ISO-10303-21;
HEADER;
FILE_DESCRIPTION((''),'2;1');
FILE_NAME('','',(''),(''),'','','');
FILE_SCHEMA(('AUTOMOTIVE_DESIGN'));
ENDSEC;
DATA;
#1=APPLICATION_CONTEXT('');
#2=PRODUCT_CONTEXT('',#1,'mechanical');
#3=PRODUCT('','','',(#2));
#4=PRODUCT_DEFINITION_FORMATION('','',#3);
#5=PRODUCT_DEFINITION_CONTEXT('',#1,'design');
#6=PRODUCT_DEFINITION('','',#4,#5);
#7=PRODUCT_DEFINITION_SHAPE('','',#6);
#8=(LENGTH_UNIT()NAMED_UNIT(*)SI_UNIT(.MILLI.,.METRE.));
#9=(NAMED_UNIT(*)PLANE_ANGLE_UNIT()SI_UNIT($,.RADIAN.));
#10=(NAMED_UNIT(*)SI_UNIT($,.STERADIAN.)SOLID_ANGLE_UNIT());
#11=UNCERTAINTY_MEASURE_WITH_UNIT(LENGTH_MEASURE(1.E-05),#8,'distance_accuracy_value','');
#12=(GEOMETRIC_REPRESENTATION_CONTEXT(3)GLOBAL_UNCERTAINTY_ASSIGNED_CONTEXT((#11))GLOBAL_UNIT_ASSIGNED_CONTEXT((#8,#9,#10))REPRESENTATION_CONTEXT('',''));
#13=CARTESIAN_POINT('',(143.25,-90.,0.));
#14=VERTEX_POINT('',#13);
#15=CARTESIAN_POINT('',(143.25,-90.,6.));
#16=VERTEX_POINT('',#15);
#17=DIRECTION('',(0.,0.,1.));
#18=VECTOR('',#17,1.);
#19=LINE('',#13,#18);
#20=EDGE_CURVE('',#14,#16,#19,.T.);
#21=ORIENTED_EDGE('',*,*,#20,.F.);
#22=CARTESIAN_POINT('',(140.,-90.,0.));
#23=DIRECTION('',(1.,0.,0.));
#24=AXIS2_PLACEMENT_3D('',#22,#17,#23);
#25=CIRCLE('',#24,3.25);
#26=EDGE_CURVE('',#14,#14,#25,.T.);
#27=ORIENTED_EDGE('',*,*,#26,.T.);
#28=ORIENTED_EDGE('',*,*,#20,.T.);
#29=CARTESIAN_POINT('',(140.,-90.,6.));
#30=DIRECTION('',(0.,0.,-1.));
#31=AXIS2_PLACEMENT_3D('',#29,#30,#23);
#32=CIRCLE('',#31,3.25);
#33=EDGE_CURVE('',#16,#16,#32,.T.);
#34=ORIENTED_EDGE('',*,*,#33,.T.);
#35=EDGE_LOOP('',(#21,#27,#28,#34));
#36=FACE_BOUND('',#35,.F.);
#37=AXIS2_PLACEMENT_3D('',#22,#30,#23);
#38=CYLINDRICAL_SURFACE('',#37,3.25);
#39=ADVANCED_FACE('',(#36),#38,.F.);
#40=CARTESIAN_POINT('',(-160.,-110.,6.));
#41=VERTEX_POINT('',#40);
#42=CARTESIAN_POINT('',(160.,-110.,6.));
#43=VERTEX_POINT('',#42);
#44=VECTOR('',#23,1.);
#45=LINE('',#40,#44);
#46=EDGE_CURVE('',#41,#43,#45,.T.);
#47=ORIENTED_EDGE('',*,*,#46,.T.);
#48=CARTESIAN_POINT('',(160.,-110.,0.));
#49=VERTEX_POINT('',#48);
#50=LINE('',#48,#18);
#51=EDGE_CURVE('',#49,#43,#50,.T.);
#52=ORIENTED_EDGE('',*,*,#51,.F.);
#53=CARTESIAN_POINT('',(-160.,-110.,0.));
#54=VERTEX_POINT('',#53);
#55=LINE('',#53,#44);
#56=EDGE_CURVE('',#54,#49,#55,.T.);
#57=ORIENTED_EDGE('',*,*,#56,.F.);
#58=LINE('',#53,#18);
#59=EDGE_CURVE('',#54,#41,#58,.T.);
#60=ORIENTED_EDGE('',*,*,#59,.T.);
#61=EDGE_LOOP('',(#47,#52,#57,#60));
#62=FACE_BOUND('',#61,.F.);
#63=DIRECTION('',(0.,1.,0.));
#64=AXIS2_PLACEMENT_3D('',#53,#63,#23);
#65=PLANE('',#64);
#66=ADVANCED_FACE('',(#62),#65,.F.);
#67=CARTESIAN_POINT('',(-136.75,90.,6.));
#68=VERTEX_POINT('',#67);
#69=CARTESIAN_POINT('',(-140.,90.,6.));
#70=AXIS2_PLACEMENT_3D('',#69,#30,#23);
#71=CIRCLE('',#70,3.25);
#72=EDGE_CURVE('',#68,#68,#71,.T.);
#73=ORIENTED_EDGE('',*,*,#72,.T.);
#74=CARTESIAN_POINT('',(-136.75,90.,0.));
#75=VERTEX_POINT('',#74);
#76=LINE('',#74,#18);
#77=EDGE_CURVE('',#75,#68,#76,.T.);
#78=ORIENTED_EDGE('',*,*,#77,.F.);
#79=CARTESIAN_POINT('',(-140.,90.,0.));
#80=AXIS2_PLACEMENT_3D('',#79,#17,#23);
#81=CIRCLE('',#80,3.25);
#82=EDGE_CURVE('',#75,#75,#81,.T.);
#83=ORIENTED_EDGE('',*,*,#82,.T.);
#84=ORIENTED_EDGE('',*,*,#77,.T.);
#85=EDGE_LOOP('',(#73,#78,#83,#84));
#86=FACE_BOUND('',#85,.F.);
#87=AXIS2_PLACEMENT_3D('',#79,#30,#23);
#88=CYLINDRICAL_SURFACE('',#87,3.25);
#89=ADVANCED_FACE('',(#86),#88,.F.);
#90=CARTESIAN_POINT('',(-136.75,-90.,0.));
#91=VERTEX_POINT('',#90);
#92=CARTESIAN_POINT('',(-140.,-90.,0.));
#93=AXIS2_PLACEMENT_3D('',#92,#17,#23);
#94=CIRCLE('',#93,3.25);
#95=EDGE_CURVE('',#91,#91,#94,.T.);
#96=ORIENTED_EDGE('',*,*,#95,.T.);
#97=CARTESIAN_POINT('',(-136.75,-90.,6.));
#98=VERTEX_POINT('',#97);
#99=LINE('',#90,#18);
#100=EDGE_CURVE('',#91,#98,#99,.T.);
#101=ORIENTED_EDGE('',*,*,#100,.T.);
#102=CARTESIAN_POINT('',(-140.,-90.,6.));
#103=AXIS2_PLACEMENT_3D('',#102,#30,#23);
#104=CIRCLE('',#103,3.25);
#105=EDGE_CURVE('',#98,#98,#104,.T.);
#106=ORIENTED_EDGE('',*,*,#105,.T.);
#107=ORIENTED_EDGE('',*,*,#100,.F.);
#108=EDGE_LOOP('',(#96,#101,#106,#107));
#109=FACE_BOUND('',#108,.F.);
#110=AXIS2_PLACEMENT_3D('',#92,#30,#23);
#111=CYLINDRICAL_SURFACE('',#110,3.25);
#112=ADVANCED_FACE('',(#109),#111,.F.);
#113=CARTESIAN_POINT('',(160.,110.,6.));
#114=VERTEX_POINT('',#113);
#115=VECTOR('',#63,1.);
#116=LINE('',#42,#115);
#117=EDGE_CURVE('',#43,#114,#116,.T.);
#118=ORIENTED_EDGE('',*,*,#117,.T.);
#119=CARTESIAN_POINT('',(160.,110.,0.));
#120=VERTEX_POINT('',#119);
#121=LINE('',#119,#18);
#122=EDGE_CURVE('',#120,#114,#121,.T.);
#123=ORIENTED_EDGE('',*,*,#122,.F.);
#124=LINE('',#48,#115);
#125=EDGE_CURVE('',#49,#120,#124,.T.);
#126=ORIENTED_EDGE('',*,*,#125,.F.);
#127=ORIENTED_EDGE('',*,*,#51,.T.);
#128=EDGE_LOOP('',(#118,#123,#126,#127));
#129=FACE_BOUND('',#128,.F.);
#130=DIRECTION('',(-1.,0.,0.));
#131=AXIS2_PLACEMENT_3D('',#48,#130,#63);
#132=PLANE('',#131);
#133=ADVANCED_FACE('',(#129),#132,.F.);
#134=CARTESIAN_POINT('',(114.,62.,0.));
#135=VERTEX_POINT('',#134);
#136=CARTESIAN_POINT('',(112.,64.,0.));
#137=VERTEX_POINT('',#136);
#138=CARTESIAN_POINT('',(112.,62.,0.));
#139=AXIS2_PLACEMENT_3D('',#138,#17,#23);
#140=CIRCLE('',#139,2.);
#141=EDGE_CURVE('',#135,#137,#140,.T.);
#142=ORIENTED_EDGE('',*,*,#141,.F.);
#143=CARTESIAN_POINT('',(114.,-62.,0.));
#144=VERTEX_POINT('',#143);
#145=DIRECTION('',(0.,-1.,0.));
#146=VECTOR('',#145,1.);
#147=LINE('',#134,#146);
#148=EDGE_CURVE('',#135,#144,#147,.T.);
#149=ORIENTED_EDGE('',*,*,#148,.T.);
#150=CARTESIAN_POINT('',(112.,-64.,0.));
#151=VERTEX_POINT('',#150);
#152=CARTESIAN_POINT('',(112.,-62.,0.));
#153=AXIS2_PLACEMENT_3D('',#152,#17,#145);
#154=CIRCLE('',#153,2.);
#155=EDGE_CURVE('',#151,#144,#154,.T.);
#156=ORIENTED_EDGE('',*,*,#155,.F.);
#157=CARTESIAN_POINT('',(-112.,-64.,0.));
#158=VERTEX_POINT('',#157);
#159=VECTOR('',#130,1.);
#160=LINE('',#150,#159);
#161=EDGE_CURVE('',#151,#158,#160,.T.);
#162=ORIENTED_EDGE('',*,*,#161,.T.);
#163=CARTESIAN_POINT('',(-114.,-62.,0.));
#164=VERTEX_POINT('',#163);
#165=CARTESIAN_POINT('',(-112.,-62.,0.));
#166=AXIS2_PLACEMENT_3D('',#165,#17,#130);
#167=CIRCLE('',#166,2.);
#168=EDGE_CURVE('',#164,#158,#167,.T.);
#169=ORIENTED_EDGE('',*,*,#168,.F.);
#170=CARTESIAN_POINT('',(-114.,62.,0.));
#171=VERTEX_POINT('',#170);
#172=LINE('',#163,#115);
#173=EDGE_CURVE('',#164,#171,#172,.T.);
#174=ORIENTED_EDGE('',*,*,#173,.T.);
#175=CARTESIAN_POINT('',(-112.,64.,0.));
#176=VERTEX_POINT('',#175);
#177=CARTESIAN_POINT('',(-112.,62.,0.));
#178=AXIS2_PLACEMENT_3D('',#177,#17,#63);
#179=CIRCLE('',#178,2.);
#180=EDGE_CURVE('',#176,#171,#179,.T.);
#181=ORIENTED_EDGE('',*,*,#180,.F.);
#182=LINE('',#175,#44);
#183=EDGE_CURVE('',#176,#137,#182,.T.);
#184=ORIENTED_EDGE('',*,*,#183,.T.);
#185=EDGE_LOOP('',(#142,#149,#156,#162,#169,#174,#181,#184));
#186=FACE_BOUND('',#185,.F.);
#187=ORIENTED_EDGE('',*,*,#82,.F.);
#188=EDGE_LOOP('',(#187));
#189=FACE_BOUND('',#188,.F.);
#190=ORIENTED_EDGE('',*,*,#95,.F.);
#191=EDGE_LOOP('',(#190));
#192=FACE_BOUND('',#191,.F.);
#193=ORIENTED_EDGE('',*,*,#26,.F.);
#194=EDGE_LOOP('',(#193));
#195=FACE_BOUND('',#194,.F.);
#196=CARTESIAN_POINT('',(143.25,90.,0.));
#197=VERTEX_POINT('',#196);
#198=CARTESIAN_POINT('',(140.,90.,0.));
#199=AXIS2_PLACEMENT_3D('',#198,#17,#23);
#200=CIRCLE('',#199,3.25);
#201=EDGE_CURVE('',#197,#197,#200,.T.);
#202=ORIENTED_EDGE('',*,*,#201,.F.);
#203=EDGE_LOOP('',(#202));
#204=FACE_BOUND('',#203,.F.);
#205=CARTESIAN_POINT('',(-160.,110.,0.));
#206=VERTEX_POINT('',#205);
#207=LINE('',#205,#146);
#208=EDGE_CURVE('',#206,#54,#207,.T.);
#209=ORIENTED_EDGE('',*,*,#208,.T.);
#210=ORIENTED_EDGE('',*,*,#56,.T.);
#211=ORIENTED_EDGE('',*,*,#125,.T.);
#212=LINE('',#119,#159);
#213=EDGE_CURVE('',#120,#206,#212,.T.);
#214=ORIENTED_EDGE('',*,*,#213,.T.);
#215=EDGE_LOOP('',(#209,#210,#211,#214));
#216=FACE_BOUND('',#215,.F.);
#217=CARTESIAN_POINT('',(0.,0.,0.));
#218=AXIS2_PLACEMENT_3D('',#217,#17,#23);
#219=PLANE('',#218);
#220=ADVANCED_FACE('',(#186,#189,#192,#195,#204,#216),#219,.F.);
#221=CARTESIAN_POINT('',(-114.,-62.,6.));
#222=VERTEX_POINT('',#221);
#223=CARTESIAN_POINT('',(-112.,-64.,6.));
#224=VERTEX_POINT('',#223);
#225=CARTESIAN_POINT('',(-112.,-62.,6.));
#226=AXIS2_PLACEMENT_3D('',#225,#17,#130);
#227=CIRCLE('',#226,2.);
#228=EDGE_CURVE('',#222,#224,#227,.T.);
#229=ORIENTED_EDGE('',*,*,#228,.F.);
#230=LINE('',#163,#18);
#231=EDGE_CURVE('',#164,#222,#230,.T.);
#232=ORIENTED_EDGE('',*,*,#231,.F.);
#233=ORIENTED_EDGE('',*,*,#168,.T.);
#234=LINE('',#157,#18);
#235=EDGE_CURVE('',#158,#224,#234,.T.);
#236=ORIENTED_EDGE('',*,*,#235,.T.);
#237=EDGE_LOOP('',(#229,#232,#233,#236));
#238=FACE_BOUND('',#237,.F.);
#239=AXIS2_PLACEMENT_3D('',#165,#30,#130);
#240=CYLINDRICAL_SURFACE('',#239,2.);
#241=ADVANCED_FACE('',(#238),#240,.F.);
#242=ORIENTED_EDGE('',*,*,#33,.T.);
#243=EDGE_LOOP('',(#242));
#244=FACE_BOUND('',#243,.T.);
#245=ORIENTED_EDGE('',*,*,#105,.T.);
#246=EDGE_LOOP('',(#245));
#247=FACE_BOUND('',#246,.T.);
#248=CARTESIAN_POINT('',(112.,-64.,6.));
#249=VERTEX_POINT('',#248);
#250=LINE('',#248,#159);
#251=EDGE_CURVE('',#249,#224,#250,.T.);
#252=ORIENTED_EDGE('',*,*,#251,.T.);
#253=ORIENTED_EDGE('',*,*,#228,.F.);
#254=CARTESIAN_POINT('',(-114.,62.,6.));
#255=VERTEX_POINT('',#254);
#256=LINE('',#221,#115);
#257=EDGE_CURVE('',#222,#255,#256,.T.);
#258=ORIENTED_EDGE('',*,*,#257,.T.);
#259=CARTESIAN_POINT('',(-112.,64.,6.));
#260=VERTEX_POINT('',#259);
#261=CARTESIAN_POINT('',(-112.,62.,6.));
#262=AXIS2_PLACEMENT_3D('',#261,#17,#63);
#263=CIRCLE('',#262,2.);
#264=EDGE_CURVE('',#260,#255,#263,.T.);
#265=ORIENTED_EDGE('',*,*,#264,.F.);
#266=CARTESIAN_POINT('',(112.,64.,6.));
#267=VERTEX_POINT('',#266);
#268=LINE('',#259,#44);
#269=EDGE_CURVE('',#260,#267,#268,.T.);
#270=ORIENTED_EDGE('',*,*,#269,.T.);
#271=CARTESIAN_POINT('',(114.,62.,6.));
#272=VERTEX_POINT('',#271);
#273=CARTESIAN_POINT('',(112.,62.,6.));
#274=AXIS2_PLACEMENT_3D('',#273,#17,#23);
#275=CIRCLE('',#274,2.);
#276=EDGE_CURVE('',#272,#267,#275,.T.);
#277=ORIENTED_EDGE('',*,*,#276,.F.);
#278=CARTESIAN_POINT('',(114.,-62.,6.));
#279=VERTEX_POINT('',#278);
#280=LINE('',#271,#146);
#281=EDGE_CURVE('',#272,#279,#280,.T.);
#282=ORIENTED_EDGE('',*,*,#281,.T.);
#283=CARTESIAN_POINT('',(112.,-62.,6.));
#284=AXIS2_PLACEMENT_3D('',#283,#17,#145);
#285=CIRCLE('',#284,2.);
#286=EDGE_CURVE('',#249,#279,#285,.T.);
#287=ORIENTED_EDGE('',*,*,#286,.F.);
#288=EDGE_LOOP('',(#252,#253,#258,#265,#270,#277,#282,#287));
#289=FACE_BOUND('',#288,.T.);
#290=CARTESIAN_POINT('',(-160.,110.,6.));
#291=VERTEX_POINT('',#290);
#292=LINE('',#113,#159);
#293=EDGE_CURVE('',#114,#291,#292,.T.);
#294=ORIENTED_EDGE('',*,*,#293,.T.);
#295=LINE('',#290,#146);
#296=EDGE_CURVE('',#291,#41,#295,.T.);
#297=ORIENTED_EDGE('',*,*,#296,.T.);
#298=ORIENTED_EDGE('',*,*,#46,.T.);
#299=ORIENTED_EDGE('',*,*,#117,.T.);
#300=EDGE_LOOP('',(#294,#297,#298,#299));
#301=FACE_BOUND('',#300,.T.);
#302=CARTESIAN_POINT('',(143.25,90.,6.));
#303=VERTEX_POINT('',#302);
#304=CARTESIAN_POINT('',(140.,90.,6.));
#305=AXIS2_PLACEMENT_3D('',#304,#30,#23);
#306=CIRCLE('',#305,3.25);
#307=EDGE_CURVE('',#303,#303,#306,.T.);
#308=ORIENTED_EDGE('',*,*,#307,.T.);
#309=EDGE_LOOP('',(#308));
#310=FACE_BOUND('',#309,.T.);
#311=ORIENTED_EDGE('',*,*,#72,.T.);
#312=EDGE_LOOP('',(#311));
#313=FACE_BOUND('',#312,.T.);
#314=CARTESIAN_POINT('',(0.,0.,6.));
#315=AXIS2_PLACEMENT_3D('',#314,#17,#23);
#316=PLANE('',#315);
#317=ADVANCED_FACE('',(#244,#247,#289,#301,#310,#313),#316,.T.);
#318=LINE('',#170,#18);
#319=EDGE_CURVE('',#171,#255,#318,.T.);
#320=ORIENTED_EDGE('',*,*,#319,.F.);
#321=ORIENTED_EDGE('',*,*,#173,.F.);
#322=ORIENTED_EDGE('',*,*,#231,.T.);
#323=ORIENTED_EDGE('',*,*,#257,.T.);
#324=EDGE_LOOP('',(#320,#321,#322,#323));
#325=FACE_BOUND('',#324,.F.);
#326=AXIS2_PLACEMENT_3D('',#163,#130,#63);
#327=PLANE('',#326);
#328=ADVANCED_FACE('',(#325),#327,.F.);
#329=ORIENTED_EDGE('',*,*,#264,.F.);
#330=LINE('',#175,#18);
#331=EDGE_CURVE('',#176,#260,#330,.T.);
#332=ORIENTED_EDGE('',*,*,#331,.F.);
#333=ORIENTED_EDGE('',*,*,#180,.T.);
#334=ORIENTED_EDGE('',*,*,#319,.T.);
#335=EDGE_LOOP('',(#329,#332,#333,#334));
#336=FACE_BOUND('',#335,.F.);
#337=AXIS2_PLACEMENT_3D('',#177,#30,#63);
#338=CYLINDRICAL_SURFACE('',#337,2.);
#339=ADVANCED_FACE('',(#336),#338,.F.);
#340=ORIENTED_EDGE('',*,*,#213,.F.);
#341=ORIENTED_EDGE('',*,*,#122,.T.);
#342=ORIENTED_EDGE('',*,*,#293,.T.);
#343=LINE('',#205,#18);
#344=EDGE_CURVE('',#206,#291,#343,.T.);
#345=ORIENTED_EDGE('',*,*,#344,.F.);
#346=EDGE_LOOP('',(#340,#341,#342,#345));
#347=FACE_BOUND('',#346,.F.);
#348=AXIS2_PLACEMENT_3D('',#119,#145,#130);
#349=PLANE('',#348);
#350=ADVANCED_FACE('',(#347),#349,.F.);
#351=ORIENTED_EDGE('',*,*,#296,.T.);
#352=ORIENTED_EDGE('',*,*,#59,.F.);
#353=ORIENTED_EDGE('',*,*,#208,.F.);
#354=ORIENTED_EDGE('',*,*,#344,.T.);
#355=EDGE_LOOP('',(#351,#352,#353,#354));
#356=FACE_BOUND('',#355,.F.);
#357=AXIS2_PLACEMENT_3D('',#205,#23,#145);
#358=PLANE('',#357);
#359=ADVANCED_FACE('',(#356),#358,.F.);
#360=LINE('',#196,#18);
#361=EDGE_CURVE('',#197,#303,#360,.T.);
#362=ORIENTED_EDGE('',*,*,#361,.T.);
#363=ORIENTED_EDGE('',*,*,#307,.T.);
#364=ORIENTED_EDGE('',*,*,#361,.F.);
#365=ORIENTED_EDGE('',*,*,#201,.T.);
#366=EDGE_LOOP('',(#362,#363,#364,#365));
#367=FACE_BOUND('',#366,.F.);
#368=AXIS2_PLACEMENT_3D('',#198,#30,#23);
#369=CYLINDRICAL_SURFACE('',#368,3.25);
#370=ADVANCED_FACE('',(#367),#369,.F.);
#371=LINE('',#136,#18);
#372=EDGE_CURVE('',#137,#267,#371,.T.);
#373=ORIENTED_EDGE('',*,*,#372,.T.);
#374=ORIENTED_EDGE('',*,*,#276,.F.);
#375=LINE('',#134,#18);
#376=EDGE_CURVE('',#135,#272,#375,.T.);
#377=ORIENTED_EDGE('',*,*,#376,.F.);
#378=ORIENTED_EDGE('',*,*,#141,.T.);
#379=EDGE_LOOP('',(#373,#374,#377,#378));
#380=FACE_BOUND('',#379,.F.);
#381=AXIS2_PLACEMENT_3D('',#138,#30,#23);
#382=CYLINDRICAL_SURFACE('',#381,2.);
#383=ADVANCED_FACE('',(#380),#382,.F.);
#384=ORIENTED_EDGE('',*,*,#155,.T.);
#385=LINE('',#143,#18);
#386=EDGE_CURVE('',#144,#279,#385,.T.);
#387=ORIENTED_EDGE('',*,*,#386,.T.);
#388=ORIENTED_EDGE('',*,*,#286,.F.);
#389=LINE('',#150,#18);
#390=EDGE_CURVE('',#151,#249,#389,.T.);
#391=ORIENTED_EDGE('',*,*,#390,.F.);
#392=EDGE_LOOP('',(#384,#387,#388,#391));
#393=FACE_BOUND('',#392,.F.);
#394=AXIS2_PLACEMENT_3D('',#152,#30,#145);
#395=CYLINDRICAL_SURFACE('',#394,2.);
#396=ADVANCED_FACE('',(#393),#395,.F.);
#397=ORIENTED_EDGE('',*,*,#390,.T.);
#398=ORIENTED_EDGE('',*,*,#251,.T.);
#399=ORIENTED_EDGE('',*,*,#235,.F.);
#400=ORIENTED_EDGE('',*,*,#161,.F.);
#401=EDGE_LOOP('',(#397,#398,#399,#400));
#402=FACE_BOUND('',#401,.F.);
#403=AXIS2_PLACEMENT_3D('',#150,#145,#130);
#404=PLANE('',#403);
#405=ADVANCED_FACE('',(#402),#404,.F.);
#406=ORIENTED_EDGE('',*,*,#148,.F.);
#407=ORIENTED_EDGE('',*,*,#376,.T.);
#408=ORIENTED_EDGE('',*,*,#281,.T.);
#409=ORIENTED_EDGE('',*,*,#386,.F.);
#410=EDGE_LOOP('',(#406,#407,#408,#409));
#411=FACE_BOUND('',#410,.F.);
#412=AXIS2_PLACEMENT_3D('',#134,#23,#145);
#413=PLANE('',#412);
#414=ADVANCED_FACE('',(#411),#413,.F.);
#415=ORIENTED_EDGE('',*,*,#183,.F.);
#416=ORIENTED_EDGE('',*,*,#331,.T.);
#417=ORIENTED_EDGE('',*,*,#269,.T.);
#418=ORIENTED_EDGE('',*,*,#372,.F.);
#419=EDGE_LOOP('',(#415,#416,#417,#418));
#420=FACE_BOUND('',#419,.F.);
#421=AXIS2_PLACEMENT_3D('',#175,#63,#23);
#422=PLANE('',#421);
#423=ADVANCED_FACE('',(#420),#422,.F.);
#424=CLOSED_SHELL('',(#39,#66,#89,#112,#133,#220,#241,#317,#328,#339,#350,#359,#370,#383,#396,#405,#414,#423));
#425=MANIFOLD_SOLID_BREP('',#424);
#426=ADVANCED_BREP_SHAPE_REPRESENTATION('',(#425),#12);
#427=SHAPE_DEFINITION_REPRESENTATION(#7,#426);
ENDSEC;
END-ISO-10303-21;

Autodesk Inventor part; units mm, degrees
ref_plane "YZ Plane" through (0, 0, 0) normal (1, 0, 0) x (0, 1, 0)
ref_plane "XZ Plane" through (0, 0, 0) normal (0, 1, 0) x (-1, 0, 0)
ref_plane "XY Plane" through (0, 0, 0) normal (0, 0, 1) x (1, 0, 0)
sketch "Skizze1" plane through (0, 0, 0) normal (0, 0, 1) x (1, 0, 0)
  line L0 (112, -64) -> (-112, -64)
  line L1 (-114, -66) -> (114, -66)
  line L2 (114, -64) -> (-114, 64) construction
  line L3 (114, 64) -> (-114, -64) construction
  line L4 (115, -70) -> (-115, -70)
  line L5 (-116, 66) -> (116, -66) construction
  line L6 (-116, -66) -> (116, 66) construction
  line L7 (120, -70) -> (-120, 70) construction
  line L8 (120, 70) -> (-120, -70) construction
  line L9 (-112, 64) -> (112, 64)
  line L10 (-115, 70) -> (115, 70)
  line L11 (114, 66) -> (-114, 66)
  line L12 (-116, 64) -> (-116, -64)
  arc A0 (-116, -64) -> (-114, -66) centre (-114, -64) ccw
  line L13 (-114, -62) -> (-114, 62)
  arc A1 (-114, -62) -> (-112, -64) centre (-112, -62) ccw
  arc A2 (-120, -65) -> (-115, -70) centre (-115, -65) ccw
  line L14 (-120, -65) -> (-120, 65)
  arc A3 (-115, 70) -> (-120, 65) centre (-115, 65) ccw
  arc A4 (-114, 66) -> (-116, 64) centre (-114, 64) ccw
  arc A5 (-112, 64) -> (-114, 62) centre (-112, 62) ccw
  arc A6 (120, 65) -> (115, 70) centre (115, 65) ccw
  line L15 (120, 65) -> (120, -65)
  arc A7 (115, -70) -> (120, -65) centre (115, -65) ccw
  arc A8 (112, -64) -> (114, -62) centre (112, -62) ccw
  arc A9 (114, 62) -> (112, 64) centre (112, 62) ccw
  line L16 (114, 62) -> (114, -62)
  arc A10 (114, -66) -> (116, -64) centre (114, -64) ccw
  arc A11 (116, 64) -> (114, 66) centre (114, 64) ccw
  line L17 (116, -64) -> (116, 64)
  line L18 (-160, -110) -> (160, -110)
  line L19 (160, -110) -> (160, 110)
  line L20 (160, 110) -> (-160, 110)
  line L21 (-160, 110) -> (-160, -110)
  line L22 (-160, -110) -> (160, 110) construction
  line L23 (160, -110) -> (-160, 110) construction
  circle A12 centre (-140, -90) radius 3.25
  line L24 (140, 90) -> (-140, 90)
  line L25 (-140, 90) -> (-140, -90)
  line L26 (-140, -90) -> (140, -90)
  line L27 (140, -90) -> (140, 90)
  line L28 (140, 90) -> (-140, -90) construction
  line L29 (-140, 90) -> (140, -90) construction
  circle A13 centre (140, -90) radius 3.25
  circle A14 centre (140, 90) radius 3.25
  circle A15 centre (-140, 90) radius 3.25
  point P0 (0, 0)
  point P1 (0, 0)
  point P2 (0, 0)
  point P3 (0, 0)
  point P4 (0, 0)
  point P5 (0, 0)
  point P6 (0, 0)
  point P7 (0, 0)
  point P8 (0, 0)
  dimension "d0" = 140
  dimension "d1" = 240
  dimension "d2" = 5
  dimension "d3" = 232
  dimension "d4" = 132
  dimension "d5" = 2
  dimension "d6" = 128
  dimension "d7" = 228
  dimension "d8" = 2
  dimension "d9" = 40
  dimension "d10" = 40
  dimension "d11" = 6.5
  dimension "d12" = 20
  dimension "d13" = 20
extrude "Extrusion1" add sketch "Skizze1" along normal blind 6 contours A0 L12 A4 L11 A11 L17 A10 L1 | L4 A2 L14 A3 L10 A6 L15 A7 | L21 L20 L19 L18 | L26 L25 A12 | A12 L25 L26 | A12 L25 A15 L24 A14 L27 A13 L26 | A13 L27 L26 | L26 L27 A13 | A15 L24 L25 | L25 L24 A15 | A14 L24 L27 | L27 L24 A14
extrude "Extrusion2" cut sketch "Skizze1" along normal through all contours L26 L25 A12 | A12 L25 L26 | A13 L27 L26 | L26 L27 A13 | A15 L24 L25 | L25 L24 A15 | A14 L24 L27 | L27 L24 A14
equation "\"d14\" = mdf_thickness"
equation "\"d16\" = mdf_thickness"
equation "\"kg_thickness\" = 4.9"
equation "\"ht_thickness\" = 1.9"
equation "\"case_thickness\" = 18"
equation "\"inner_thickness\" = 15"
equation "\"gap_fit\" = 0.1"
equation "\"gap_slide\" = 0.2"
equation "\"gap_air\" = 1"
equation "\"bore_diameter\" = 73"
equation "\"mdf_thickness\" = 6"
equation "\"tape_width\" = 15"
equation "\"tape_thickness\" = 3"
equation "\"inner_depth\" = 255"
properties part number "Flachfaltenfilter_Basis"
